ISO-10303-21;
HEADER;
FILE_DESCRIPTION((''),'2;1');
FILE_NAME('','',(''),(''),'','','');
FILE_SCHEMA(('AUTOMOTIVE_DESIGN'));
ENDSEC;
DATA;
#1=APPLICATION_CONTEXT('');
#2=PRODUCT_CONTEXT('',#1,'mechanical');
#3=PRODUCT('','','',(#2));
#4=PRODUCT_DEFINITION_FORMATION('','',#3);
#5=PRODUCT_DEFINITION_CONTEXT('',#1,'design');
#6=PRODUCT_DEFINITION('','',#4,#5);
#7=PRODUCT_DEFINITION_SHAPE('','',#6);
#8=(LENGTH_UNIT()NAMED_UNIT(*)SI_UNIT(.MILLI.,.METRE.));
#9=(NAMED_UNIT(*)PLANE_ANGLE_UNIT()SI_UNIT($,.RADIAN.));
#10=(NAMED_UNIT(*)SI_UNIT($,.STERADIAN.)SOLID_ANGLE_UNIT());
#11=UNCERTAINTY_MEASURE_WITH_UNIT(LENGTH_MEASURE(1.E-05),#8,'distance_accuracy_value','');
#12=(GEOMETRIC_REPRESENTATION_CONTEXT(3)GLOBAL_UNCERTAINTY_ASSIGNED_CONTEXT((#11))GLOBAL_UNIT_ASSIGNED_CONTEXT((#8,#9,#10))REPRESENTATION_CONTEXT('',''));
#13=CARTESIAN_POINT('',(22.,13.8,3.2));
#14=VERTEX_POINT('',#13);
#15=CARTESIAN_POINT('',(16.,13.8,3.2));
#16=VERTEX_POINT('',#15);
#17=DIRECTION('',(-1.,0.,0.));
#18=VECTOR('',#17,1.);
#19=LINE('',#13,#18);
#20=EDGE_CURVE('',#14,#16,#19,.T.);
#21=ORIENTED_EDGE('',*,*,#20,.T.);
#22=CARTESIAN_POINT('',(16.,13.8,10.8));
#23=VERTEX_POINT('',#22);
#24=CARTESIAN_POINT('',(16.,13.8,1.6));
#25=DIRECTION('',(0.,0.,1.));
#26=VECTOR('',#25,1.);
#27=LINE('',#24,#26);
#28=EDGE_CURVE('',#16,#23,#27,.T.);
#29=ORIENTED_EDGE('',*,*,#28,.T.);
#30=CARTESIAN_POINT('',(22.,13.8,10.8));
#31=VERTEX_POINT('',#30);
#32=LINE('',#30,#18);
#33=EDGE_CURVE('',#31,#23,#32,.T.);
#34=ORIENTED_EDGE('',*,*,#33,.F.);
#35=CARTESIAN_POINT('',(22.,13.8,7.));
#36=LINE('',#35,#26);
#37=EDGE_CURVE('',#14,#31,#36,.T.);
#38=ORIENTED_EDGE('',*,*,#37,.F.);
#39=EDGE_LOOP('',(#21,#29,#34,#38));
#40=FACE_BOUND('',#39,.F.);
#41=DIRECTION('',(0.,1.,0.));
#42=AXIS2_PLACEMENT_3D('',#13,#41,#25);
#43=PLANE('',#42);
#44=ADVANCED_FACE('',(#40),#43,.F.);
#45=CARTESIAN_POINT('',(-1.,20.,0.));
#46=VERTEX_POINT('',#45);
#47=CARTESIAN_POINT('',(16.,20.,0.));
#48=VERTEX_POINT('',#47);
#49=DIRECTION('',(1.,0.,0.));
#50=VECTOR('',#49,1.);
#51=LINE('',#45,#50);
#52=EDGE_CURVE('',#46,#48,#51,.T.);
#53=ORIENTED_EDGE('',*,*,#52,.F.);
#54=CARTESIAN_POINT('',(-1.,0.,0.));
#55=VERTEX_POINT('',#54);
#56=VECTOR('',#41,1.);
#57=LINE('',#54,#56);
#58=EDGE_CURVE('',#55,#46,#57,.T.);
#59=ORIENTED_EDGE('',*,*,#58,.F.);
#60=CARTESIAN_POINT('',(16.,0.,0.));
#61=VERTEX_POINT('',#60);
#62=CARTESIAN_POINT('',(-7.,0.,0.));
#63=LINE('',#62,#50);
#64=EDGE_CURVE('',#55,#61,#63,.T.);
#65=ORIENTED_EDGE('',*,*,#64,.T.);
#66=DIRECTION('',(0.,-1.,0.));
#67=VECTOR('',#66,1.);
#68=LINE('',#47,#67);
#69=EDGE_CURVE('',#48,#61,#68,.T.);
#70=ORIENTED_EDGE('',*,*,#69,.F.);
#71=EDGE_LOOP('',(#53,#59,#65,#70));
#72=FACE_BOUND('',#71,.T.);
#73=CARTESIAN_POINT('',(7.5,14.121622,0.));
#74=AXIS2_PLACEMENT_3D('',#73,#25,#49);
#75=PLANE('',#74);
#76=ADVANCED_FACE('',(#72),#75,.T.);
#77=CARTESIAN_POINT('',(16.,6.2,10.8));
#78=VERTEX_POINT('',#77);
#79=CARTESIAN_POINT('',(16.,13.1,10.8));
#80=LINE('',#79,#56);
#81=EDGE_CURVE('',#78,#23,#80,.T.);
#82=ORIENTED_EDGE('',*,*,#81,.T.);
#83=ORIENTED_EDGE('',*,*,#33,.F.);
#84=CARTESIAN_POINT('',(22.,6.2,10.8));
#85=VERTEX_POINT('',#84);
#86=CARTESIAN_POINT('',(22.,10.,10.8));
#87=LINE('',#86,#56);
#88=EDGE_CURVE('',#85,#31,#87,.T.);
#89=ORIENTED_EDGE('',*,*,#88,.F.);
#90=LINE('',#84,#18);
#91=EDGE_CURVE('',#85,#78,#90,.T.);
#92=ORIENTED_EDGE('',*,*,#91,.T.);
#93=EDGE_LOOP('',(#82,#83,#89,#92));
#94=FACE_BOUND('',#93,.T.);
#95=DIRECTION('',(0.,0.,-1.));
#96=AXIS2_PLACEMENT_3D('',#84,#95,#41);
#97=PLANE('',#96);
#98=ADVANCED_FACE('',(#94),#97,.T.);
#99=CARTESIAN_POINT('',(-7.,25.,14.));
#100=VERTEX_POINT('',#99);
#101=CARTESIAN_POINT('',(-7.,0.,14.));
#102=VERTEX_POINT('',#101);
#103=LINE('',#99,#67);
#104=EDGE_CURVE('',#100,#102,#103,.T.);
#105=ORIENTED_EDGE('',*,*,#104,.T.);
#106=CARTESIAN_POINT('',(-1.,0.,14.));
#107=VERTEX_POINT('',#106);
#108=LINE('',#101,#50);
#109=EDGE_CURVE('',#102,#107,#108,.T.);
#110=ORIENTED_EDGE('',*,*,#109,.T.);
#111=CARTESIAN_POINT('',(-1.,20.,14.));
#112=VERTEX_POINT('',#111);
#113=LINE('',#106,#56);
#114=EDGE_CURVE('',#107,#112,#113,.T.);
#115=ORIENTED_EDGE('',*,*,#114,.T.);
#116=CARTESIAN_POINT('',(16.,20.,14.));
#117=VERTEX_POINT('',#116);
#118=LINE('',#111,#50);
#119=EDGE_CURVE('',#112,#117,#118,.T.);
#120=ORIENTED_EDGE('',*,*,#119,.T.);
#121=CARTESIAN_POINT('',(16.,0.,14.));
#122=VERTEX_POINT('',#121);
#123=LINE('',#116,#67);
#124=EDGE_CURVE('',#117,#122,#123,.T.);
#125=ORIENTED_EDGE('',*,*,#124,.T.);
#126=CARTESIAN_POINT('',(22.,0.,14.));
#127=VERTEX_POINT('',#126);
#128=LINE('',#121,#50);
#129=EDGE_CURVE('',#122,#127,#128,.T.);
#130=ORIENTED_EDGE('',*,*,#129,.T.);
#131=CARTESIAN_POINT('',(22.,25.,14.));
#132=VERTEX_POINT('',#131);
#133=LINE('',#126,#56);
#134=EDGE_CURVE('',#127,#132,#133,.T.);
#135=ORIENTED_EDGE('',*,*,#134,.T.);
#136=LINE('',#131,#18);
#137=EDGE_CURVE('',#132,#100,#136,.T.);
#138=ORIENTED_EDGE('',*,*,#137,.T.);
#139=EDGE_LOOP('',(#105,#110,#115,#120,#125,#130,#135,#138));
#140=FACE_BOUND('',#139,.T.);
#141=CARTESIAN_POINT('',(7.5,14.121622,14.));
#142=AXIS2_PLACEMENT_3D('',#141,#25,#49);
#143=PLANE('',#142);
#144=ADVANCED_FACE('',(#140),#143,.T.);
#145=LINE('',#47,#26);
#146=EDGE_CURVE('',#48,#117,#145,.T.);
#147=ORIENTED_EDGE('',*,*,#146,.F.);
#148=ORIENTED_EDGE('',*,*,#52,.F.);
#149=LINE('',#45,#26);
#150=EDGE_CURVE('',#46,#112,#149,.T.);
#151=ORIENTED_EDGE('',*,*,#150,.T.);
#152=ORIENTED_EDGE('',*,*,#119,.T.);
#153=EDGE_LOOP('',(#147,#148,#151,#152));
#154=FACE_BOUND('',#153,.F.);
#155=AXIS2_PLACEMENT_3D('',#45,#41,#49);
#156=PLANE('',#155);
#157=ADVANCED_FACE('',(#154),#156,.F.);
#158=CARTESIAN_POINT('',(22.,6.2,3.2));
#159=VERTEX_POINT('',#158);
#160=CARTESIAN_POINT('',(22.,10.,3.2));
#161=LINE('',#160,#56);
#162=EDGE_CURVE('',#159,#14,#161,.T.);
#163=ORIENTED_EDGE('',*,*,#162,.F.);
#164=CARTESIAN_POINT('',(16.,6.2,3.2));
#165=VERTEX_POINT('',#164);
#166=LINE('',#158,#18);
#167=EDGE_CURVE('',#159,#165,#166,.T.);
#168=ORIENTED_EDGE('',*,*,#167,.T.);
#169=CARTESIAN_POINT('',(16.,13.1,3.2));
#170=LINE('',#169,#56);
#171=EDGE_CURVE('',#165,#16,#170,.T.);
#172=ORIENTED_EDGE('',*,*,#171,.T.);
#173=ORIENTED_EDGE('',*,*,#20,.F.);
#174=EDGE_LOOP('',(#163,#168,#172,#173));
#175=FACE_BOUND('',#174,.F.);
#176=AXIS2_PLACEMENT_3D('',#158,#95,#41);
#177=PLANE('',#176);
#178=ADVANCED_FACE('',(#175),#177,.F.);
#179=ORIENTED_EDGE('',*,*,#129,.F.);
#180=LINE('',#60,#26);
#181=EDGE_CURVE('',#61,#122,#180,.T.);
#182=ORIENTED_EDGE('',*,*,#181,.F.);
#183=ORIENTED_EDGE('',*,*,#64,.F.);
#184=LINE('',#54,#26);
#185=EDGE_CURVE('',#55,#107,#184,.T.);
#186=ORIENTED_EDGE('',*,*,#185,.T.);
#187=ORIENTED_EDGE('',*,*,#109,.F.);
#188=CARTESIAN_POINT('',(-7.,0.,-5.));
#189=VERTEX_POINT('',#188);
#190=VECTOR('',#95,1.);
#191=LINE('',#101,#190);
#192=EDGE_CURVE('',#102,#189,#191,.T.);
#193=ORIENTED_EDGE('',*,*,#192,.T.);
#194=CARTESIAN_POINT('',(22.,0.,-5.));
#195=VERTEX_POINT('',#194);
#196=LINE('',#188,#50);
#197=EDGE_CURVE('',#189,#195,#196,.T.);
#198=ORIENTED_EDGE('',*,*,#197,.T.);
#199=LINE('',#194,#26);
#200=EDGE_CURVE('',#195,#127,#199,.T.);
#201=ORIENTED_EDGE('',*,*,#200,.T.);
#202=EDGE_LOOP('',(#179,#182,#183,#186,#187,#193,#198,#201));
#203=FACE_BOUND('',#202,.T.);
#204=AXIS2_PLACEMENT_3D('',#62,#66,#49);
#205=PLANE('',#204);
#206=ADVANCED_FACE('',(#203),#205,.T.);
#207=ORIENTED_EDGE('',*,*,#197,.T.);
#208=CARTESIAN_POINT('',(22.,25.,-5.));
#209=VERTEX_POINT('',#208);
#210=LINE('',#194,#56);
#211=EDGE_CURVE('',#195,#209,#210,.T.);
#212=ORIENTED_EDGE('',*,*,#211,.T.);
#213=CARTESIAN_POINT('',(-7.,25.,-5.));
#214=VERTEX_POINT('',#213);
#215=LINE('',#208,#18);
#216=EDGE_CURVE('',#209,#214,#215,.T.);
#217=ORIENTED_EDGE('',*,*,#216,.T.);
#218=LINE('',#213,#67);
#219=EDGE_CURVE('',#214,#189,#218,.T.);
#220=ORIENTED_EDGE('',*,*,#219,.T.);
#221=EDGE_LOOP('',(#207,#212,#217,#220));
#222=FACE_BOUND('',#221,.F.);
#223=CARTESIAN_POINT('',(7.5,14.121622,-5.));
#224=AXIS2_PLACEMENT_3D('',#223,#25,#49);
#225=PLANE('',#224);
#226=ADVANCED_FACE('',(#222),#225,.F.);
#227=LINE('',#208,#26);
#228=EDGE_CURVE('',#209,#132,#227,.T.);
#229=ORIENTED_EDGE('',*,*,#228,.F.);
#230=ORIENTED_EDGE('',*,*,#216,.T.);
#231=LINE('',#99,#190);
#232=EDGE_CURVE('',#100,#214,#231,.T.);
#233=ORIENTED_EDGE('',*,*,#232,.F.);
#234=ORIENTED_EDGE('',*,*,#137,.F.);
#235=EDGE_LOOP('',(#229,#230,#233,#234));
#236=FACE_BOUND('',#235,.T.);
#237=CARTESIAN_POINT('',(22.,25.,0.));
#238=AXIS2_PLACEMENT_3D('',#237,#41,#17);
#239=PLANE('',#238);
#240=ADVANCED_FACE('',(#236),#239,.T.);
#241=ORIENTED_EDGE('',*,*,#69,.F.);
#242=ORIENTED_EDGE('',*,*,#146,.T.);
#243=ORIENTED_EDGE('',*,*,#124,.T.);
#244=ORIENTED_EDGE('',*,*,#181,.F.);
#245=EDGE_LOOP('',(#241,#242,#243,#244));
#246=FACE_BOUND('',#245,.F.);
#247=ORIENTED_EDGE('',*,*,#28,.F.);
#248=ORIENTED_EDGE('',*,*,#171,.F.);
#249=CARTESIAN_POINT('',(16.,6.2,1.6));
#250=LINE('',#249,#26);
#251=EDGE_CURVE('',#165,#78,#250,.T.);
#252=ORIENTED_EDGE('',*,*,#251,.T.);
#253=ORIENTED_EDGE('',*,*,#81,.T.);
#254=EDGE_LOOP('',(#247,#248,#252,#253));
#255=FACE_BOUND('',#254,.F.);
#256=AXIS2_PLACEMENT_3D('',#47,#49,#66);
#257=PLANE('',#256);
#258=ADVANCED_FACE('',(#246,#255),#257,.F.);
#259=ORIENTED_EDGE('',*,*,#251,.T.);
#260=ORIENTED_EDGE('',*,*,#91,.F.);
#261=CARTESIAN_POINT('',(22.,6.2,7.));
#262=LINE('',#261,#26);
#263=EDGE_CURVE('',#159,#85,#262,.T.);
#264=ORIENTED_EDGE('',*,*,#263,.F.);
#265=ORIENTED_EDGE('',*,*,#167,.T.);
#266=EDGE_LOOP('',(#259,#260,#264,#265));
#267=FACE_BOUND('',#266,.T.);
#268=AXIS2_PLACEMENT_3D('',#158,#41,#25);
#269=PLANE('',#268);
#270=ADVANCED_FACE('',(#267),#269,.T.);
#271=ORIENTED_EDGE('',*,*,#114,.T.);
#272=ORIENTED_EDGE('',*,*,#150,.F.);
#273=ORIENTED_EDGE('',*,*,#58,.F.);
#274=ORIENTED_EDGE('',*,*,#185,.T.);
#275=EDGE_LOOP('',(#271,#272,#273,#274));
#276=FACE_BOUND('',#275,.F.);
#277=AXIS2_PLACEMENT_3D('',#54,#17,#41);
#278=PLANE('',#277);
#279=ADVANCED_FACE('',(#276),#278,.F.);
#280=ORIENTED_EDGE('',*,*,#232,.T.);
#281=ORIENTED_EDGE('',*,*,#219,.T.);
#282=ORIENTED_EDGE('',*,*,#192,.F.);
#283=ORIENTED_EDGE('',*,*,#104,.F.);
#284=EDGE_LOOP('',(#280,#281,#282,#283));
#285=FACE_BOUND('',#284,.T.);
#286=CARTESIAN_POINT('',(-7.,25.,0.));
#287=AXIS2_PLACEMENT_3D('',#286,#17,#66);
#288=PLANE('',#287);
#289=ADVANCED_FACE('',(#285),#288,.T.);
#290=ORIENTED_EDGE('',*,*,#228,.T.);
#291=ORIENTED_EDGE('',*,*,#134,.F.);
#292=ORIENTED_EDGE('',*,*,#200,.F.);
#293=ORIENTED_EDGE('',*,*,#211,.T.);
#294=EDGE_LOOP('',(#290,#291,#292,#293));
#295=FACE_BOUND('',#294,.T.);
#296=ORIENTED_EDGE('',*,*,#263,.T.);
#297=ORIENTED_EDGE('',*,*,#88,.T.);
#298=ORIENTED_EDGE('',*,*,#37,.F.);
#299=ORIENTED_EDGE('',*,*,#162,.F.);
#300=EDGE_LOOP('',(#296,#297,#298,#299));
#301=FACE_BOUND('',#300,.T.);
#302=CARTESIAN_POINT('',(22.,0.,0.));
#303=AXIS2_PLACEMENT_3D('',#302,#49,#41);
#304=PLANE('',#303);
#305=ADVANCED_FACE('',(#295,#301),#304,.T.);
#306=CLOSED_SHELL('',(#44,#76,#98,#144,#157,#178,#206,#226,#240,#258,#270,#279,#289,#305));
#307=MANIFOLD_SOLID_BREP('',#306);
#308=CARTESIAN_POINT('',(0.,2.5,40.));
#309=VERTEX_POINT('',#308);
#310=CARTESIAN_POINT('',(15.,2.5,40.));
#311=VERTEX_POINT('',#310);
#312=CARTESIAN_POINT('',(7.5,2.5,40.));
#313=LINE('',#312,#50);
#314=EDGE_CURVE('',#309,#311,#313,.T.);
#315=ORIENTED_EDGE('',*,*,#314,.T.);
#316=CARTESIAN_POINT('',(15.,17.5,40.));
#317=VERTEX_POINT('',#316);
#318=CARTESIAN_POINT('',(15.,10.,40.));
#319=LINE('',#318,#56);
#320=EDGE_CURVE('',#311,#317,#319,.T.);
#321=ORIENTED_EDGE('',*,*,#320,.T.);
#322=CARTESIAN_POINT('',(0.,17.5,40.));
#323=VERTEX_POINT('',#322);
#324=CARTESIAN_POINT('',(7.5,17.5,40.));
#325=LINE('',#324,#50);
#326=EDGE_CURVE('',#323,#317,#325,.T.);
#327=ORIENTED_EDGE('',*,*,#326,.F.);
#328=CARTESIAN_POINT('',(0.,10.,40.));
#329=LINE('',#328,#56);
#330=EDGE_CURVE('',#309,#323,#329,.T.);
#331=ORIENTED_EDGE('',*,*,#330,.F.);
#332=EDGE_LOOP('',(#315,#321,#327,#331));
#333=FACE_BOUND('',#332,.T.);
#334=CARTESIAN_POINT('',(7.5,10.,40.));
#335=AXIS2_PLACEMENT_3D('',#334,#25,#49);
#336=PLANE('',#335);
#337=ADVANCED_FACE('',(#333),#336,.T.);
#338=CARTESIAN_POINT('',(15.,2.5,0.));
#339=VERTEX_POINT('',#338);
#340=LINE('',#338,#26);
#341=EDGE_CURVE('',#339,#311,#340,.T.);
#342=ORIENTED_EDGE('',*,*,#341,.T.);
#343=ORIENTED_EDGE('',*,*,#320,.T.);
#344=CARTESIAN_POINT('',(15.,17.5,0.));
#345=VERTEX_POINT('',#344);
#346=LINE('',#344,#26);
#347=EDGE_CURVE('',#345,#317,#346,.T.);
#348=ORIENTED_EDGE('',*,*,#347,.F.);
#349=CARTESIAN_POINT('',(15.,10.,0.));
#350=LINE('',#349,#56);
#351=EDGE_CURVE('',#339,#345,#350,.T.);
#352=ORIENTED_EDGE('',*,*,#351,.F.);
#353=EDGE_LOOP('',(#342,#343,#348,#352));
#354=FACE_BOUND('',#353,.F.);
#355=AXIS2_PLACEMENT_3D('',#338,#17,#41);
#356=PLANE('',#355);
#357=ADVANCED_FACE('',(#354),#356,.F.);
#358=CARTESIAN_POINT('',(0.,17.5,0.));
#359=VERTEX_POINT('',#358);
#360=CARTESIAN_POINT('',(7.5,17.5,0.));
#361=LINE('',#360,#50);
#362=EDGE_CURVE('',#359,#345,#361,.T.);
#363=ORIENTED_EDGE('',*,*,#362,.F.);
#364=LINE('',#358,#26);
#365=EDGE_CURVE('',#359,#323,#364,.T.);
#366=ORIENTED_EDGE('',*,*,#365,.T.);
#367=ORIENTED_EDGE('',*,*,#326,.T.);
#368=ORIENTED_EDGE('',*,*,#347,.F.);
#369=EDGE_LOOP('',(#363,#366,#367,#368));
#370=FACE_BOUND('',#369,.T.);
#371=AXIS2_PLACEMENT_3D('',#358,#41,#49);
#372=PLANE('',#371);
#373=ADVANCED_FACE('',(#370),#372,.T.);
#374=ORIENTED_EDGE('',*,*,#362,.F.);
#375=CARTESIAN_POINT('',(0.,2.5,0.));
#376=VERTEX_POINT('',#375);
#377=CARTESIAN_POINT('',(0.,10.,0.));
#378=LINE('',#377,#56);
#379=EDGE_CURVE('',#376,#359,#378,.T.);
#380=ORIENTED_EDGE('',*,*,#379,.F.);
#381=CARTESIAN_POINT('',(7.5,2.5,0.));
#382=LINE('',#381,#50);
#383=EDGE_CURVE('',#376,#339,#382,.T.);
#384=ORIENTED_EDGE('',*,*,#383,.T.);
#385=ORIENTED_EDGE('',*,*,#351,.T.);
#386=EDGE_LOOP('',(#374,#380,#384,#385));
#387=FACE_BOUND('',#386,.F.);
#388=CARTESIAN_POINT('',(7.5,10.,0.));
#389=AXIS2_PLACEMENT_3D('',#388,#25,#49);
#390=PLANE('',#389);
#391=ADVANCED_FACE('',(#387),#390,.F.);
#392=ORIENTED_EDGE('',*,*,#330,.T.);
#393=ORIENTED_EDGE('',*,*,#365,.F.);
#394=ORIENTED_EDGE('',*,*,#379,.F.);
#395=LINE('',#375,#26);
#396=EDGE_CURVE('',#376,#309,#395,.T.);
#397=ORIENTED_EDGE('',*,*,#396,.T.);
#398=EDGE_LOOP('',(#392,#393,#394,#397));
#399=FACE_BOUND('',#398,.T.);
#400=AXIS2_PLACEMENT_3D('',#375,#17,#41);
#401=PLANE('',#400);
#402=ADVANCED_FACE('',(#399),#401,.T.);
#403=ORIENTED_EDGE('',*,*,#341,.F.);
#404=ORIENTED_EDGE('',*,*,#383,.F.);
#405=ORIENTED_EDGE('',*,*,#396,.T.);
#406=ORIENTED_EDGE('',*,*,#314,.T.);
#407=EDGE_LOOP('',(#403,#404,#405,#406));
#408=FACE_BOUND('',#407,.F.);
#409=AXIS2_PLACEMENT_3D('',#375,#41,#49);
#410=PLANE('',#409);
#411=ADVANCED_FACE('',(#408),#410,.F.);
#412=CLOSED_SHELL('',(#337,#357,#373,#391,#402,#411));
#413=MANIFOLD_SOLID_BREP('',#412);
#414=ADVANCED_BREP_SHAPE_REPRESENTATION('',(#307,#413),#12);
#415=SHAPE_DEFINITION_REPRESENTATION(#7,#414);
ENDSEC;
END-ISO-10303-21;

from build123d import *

# Parameters (mm, degrees)
F0_W     = 15
F0_H     = 15
F1_DEPTH = 40
F3_DEPTH = 14
F5_W     = 7.6
F5_H     = 7.6
F6_DEPTH = 20
F2_W     = 17
F2_H     = 20
F7_DEPTH = 5


with BuildPart() as f1:
    # F0 (on Top) → F1 (new body)
    with BuildSketch(Plane.XY):
        with Locations((7.5, 10)):
            Rectangle(F0_W, F0_H)
    extrude(amount=F1_DEPTH)


with BuildPart() as f3:
    # F2 (on Top) → F3 (new body)
    with BuildSketch(Plane.XY):
        Polygon((-7, 0), (-1, 0), (-1, 20), (16, 20), (16, 0), (22, 0), (22, 25), (-7, 25), align=None)
    extrude(amount=F3_DEPTH)

    # F5 (on offset) → F6 (cut)
    with BuildSketch(Plane.YZ.offset(22)):
        with Locations((10, 7)):
            Rectangle(F5_W, F5_H)
    extrude(amount=-F6_DEPTH, mode=Mode.SUBTRACT)

    # F2 (on Top) → F7 (join)
    with BuildSketch(Plane.XY):
        Polygon((-7, 0), (-1, 0), (-1, 20), (16, 20), (16, 0), (22, 0), (22, 25), (-7, 25), align=None)
        with Locations((7.5, 10)):
            Rectangle(F2_W, F2_H)
    extrude(amount=-F7_DEPTH)


solid = Compound([f1.part, f3.part])
